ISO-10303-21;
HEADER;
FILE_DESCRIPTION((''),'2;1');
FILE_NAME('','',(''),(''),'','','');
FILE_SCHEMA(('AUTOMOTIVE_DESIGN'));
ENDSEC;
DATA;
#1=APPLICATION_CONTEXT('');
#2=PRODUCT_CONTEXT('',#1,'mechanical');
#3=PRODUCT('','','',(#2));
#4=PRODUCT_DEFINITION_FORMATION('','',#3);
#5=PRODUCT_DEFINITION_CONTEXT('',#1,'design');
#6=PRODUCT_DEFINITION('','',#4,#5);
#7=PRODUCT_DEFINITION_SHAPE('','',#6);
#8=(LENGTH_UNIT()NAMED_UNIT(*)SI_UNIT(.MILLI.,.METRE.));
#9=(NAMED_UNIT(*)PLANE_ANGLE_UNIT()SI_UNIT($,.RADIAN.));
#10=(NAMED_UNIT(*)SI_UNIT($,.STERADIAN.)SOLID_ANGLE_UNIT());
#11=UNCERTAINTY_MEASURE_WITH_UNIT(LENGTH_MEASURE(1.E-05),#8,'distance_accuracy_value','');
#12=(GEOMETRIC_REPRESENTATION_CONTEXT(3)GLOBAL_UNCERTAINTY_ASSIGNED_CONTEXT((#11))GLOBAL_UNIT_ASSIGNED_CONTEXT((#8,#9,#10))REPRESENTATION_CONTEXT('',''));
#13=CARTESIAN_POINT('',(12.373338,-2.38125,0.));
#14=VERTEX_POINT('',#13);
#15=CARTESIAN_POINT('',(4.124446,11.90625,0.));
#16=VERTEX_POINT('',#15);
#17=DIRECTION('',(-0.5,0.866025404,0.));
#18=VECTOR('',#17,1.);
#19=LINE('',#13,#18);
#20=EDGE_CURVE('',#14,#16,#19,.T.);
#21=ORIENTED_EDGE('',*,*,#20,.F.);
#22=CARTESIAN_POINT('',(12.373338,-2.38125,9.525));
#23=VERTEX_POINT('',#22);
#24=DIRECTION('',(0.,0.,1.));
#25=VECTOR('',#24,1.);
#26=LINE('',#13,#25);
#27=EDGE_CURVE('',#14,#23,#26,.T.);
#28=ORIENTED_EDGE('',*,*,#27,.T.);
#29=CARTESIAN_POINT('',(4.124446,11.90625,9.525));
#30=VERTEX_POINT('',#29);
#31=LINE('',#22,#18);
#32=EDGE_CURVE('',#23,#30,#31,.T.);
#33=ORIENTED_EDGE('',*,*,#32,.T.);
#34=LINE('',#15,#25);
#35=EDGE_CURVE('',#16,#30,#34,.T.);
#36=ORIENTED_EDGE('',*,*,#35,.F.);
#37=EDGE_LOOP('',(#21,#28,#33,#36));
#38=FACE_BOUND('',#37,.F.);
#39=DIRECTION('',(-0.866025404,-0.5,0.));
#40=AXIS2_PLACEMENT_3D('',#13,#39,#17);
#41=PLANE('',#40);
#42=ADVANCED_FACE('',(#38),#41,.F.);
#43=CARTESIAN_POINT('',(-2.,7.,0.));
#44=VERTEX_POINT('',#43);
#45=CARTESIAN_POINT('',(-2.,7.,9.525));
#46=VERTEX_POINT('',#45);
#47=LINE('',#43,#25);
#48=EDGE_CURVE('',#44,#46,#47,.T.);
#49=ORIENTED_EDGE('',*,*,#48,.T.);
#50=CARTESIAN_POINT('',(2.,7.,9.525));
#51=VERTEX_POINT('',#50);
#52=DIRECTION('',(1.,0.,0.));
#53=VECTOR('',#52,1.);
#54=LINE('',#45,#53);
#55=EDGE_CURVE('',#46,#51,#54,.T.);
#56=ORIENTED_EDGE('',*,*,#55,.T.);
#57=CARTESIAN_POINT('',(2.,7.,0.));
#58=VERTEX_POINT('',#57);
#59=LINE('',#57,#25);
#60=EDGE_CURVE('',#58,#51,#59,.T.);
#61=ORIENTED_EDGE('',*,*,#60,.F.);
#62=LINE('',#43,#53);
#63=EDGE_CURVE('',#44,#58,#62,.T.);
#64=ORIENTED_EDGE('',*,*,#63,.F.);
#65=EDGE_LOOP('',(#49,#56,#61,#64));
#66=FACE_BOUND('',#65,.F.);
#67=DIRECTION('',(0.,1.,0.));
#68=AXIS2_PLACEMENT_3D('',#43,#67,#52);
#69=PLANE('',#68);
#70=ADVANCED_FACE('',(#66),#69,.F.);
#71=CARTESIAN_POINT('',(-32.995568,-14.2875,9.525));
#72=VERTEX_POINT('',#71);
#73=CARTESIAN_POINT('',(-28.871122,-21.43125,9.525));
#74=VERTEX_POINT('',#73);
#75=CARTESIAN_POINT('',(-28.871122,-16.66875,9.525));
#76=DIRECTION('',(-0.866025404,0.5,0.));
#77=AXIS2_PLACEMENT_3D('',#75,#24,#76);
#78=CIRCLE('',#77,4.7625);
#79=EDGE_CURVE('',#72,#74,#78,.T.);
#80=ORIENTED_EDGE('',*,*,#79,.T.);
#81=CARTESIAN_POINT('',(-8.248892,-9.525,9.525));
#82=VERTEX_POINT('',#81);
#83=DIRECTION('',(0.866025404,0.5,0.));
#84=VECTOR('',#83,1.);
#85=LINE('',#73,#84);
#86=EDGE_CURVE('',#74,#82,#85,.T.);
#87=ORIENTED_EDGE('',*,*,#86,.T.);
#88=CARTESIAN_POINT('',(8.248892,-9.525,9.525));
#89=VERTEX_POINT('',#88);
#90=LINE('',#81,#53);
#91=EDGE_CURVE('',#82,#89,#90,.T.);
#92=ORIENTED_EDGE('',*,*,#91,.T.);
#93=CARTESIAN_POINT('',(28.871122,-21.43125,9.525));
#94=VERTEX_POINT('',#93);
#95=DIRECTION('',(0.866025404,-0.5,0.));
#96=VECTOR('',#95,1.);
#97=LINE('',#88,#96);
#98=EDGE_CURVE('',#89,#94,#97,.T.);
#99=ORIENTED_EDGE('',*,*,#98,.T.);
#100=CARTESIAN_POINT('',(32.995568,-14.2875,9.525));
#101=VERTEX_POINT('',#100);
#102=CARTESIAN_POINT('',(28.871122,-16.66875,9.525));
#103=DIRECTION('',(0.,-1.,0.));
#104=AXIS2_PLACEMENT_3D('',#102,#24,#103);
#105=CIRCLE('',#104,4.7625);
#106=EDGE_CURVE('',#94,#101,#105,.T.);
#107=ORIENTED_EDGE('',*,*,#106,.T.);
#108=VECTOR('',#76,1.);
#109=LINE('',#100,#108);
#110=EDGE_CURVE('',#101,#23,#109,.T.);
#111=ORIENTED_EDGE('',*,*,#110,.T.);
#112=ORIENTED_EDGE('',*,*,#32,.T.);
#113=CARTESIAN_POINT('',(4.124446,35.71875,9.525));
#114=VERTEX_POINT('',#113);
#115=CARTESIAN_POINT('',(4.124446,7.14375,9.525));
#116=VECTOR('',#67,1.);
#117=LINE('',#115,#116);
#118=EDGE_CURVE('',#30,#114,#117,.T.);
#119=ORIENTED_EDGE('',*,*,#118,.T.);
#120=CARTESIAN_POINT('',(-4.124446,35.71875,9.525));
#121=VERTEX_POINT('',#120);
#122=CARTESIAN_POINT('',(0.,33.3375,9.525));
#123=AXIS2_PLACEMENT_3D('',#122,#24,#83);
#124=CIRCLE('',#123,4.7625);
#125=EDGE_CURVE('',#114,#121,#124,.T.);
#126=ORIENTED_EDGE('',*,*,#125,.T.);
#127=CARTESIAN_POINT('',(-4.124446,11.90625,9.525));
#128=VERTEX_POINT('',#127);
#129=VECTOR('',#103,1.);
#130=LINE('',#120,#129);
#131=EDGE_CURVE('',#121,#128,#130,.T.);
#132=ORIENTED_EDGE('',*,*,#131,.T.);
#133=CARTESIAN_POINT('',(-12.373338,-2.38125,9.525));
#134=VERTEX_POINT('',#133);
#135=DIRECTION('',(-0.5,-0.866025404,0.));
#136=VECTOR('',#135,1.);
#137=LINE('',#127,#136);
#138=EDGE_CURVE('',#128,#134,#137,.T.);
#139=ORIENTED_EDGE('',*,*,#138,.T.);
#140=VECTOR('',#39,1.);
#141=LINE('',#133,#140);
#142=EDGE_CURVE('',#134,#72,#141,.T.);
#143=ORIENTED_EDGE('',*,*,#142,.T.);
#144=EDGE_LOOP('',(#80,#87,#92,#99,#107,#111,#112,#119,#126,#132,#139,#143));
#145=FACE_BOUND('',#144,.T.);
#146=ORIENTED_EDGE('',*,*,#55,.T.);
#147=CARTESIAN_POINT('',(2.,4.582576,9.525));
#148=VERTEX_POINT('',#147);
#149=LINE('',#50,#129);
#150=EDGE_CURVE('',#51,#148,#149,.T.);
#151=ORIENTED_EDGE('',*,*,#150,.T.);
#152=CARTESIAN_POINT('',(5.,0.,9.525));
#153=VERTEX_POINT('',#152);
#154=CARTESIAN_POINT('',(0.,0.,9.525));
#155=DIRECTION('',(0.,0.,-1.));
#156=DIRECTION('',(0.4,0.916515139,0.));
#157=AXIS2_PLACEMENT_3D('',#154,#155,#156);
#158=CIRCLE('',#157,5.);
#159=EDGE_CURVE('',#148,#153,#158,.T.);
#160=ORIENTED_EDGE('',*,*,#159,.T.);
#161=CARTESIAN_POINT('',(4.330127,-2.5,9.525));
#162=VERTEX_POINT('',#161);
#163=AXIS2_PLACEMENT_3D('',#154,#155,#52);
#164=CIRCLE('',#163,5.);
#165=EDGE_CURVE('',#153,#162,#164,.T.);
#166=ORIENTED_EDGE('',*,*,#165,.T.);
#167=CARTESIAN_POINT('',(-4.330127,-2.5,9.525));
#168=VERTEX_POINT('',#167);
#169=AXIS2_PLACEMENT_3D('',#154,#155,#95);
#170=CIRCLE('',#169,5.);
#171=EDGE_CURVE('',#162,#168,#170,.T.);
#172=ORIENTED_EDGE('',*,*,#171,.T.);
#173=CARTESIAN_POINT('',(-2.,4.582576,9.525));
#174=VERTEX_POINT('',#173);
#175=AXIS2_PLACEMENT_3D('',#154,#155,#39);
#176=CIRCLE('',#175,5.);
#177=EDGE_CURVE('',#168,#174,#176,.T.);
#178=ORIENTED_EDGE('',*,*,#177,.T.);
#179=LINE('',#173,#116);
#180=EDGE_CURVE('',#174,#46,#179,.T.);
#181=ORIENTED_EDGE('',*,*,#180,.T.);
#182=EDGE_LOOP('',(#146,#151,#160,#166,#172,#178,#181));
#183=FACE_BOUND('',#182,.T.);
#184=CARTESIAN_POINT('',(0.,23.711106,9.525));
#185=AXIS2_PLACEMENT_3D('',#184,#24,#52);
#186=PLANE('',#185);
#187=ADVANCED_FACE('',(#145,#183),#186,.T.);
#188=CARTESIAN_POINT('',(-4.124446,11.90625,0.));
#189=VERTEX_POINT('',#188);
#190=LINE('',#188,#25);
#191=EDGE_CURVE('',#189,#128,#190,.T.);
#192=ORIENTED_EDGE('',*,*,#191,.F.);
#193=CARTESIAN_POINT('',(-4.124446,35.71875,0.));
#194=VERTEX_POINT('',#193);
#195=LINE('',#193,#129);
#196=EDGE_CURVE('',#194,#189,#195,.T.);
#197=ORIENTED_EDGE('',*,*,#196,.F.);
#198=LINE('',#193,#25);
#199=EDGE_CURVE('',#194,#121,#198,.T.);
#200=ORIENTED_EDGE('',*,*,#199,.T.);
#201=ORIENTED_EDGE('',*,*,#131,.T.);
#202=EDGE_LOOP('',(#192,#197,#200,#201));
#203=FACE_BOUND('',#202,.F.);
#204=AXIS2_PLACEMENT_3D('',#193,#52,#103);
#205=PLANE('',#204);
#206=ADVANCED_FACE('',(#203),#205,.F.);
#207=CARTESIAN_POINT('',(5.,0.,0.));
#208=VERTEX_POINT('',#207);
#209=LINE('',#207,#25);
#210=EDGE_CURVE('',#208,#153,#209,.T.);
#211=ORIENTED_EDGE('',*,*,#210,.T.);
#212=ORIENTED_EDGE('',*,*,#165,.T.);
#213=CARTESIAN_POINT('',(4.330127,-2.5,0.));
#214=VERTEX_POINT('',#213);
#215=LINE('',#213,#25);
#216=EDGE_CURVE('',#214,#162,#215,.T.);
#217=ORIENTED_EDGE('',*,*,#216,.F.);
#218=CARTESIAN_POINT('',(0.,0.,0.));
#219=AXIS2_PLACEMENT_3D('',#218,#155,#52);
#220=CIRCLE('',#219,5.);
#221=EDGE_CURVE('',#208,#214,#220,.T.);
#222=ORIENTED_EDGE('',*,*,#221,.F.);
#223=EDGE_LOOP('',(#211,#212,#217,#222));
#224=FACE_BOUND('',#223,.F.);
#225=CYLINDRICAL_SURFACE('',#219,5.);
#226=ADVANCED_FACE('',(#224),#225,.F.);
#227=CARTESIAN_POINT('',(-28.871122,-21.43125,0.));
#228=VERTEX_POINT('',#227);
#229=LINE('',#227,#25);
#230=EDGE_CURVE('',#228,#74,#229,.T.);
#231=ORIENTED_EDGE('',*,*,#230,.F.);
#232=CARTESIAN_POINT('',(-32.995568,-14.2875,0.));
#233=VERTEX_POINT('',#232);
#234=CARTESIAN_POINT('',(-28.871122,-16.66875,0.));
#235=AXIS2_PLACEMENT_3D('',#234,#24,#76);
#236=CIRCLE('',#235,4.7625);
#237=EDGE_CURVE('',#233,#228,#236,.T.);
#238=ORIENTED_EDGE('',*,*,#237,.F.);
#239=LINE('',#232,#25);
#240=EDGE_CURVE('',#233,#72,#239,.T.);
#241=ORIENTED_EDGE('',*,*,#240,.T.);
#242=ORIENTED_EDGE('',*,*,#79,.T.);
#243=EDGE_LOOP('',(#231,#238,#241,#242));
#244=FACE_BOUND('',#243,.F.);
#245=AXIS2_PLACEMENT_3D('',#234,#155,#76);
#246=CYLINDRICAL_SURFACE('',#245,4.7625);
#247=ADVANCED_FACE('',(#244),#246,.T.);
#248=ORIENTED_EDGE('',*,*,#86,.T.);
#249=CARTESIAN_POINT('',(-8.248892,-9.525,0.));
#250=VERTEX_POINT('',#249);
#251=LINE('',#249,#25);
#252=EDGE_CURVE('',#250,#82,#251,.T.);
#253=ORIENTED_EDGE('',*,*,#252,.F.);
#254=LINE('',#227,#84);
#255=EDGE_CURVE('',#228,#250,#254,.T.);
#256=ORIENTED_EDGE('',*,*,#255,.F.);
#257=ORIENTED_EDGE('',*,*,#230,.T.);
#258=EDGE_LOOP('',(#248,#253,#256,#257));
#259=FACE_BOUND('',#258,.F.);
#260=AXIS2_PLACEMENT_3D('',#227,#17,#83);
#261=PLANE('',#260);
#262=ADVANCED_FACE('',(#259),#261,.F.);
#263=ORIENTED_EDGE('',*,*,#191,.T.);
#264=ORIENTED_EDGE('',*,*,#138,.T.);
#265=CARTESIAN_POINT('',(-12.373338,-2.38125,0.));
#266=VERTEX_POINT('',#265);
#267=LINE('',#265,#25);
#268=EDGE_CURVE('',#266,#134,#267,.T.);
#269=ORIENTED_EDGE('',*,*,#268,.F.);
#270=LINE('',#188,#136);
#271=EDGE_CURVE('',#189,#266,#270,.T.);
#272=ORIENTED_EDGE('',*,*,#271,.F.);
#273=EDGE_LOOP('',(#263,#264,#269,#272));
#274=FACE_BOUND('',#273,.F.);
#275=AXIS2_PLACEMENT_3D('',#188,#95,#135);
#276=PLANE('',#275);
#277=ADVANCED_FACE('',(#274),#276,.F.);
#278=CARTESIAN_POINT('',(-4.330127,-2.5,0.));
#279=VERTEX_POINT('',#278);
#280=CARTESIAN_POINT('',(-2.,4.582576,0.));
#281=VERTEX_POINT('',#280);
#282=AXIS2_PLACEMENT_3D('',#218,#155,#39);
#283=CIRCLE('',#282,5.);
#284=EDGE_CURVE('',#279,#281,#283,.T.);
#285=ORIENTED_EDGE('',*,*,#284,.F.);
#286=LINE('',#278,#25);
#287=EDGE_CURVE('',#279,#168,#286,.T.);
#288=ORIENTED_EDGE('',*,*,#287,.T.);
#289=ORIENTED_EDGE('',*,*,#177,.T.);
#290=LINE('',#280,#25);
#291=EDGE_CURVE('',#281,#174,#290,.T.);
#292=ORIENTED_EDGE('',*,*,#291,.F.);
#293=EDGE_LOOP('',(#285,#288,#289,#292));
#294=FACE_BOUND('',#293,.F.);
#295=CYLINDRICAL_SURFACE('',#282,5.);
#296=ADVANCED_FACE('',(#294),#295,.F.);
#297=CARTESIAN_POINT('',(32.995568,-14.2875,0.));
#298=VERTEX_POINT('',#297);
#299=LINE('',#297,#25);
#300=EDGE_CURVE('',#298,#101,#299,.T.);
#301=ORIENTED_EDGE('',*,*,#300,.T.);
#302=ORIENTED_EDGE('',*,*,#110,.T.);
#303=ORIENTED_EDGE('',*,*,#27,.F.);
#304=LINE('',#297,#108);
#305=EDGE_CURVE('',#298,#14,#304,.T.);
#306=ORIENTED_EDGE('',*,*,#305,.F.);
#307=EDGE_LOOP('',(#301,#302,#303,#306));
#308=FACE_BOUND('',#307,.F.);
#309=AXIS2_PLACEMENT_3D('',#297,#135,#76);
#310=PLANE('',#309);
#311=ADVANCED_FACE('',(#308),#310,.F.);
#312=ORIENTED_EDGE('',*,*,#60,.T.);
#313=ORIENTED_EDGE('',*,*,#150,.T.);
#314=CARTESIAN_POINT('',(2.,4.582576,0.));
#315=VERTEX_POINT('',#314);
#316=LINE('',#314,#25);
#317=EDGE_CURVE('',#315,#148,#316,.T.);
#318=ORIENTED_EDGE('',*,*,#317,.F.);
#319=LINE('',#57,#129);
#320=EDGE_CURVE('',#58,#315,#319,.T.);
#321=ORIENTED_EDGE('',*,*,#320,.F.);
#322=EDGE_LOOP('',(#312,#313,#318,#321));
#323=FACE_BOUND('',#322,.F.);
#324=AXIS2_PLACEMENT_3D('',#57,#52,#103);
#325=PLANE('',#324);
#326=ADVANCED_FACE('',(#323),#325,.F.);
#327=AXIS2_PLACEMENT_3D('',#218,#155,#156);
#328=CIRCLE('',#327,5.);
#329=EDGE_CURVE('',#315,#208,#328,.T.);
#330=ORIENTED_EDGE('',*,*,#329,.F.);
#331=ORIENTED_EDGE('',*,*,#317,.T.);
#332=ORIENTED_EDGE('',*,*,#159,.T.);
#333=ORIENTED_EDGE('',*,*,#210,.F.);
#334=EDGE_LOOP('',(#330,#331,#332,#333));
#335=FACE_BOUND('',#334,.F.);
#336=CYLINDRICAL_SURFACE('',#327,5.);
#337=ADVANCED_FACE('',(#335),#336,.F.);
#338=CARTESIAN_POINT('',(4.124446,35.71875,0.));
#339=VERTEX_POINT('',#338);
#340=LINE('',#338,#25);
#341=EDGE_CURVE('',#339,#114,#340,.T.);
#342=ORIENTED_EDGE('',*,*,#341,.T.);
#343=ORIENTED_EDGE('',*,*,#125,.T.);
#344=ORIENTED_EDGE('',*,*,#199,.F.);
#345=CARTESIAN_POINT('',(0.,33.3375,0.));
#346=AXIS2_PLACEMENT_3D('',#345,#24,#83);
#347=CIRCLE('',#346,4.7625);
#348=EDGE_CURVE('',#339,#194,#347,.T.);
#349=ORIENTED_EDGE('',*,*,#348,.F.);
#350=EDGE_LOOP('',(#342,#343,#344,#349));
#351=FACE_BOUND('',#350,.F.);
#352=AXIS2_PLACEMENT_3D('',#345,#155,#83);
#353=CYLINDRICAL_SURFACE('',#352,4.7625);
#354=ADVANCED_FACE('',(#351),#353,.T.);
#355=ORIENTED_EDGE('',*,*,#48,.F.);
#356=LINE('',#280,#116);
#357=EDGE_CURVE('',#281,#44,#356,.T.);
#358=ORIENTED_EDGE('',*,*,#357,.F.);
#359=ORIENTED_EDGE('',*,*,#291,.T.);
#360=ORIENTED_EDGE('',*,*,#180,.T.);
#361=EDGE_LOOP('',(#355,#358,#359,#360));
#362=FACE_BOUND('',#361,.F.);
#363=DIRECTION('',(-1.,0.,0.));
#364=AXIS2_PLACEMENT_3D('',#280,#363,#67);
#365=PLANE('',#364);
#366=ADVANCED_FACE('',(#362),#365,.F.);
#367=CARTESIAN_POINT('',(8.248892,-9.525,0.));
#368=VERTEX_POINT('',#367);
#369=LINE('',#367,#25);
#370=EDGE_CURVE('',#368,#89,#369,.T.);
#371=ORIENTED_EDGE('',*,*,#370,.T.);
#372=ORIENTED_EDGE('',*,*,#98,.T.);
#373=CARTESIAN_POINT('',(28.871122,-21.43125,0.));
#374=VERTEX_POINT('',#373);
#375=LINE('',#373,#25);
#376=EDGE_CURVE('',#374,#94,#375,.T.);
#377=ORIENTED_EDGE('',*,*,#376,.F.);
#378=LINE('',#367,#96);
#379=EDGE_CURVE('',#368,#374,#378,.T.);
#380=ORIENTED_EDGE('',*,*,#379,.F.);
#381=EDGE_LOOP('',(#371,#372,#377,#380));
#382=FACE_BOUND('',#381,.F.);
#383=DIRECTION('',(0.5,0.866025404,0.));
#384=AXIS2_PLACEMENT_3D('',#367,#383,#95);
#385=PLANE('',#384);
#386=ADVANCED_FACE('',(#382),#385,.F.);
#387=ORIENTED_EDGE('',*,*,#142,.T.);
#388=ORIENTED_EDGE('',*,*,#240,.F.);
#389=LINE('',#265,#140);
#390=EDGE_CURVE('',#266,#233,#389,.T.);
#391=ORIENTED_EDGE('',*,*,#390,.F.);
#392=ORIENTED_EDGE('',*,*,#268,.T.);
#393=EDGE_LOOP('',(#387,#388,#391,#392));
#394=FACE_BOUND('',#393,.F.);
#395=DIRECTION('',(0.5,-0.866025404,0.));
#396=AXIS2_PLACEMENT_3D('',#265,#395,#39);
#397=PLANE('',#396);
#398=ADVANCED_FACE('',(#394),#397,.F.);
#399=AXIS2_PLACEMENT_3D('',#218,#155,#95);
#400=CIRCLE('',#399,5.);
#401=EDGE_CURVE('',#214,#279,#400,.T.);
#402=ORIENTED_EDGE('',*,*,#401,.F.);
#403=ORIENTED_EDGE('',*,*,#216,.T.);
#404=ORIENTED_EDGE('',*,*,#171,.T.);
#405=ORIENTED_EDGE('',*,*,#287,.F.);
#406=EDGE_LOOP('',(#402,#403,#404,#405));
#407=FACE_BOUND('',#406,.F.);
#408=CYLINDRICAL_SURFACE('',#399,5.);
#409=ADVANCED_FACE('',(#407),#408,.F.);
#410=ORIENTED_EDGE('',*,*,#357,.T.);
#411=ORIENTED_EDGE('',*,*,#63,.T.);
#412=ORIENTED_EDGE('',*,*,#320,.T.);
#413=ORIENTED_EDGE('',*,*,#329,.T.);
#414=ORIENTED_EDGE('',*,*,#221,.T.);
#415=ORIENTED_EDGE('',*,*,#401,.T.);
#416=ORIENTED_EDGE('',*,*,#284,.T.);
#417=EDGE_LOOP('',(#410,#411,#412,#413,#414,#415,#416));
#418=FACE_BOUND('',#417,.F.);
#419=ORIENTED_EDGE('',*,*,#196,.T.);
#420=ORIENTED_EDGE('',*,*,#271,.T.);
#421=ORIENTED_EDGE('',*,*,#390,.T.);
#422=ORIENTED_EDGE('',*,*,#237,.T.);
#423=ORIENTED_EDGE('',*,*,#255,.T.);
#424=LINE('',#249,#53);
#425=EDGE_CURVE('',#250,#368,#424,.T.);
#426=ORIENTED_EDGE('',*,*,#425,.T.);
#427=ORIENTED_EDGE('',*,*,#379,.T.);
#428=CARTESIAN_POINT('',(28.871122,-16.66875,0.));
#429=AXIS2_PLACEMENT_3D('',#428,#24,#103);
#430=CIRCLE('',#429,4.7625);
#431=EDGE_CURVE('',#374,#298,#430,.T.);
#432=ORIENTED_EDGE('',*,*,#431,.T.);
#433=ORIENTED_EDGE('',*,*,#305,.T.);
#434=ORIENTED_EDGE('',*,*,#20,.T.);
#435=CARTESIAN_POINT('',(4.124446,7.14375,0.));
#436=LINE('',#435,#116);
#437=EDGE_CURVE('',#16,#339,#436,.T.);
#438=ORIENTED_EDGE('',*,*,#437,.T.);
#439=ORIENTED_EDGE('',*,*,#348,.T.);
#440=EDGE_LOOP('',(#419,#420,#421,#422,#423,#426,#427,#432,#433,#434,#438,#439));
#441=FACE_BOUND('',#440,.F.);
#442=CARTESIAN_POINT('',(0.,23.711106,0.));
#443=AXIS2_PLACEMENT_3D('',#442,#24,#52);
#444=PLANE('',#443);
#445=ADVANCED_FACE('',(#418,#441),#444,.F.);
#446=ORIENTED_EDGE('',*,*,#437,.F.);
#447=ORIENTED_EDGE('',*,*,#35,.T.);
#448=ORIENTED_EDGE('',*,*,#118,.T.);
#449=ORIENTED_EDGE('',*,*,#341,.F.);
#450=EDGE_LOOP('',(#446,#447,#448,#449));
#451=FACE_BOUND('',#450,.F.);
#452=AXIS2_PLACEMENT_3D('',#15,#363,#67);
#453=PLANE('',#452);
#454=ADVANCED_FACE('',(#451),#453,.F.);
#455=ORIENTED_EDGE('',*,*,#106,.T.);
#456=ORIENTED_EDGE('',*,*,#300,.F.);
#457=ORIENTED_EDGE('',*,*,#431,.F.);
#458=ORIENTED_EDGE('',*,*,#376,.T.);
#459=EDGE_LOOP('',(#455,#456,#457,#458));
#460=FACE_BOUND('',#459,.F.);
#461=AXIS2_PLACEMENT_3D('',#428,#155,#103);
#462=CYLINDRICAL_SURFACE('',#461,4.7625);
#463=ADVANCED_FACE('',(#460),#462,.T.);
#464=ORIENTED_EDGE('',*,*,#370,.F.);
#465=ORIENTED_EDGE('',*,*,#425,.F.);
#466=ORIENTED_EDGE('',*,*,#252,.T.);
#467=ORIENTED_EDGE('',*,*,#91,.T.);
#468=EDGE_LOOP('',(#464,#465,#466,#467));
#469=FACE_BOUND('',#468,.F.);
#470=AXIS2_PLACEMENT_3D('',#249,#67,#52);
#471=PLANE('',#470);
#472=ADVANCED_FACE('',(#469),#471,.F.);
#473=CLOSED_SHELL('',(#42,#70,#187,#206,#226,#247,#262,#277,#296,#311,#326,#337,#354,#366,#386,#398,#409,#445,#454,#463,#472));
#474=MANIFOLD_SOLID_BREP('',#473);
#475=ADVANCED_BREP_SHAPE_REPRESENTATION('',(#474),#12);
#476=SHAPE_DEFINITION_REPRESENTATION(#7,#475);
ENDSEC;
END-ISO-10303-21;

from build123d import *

# Parameters (mm, degrees)
F2_DEPTH = 9.525


# Not quite as in the source:
# - a variable given as a bare number and used for a length is read in inches; the dataset says mm whatever the document's units were


with BuildPart() as f2:
    # F1 (on Top) → F2 (new body)
    with BuildSketch(Plane.XY):
        with BuildLine():
            Line((4.1244459855, 11.90625), (4.1244459855, 35.71875))
            ThreePointArc((4.1244459855, 35.71875), (0, 38.1), (-4.1244459855, 35.71875))
            Line((-4.1244459855, 35.71875), (-4.1244459855, 11.90625))
            Line((-4.1244459855, 11.90625), (0, 19.05))
            Line((0, 19.05), (4.1244459855, 11.90625))
        make_face()
        with BuildLine():
            Line((4.1244459855, 7.14375), (4.1244459855, 11.90625))
            Line((4.1244459855, 11.90625), (0, 19.05))
            Line((0, 19.05), (0, 7))
            Line((0, 7), (2, 7))
            Line((2, 7), (2, 4.582575695))
            ThreePointArc((2, 4.582575695), (4.1833001327, 2.7386127875), (5, 0))
            ThreePointArc((5, 0), (4.8296291314, -1.2940952255), (4.3301270189, -2.5))
            Line((4.3301270189, -2.5), (16.4977839421, -9.525))
            Line((16.4977839421, -9.525), (12.3733379566, -2.38125))
            Line((12.3733379566, -2.38125), (8.248891971, 0))
            Line((8.248891971, 0), (4.1244459855, 7.14375))
        make_face()
        with BuildLine():
            Line((0, 19.05), (-4.1244459855, 11.90625))
            Line((-4.1244459855, 11.90625), (-4.1244459855, 7.14375))
            Line((-4.1244459855, 7.14375), (-8.248891971, 0))
            Line((-8.248891971, 0), (-12.3733379566, -2.38125))
            Line((-12.3733379566, -2.38125), (-16.4977839421, -9.525))
            Line((-16.4977839421, -9.525), (-4.3301270189, -2.5))
            ThreePointArc((-4.3301270189, -2.5), (-4.7495627838, 1.562579074), (-2, 4.582575695))
            Line((-2, 4.582575695), (-2, 7))
            Line((-2, 7), (0, 7))
            Line((0, 7), (0, 19.05))
        make_face()
        with BuildLine():
            Line((4.1244459855, -7.14375), (8.248891971, -9.525))
            Line((8.248891971, -9.525), (16.4977839421, -9.525))
            Line((16.4977839421, -9.525), (4.3301270189, -2.5))
            ThreePointArc((4.3301270189, -2.5), (0, -5), (-4.3301270189, -2.5))
            Line((-4.3301270189, -2.5), (-16.4977839421, -9.525))
            Line((-16.4977839421, -9.525), (-8.248891971, -9.525))
            Line((-8.248891971, -9.525), (-4.1244459855, -7.14375))
            Line((-4.1244459855, -7.14375), (4.1244459855, -7.14375))
        make_face()
        with BuildLine():
            ThreePointArc((28.8711218987, -21.43125), (32.9955678842, -19.05), (32.9955678842, -14.2875))
            Line((32.9955678842, -14.2875), (12.3733379566, -2.38125))
            Line((12.3733379566, -2.38125), (16.4977839421, -9.525))
            Line((16.4977839421, -9.525), (8.248891971, -9.525))
            Line((8.248891971, -9.525), (28.8711218987, -21.43125))
        make_face()
        with BuildLine():
            Line((-12.3733379566, -2.38125), (-32.9955678842, -14.2875))
            ThreePointArc((-32.9955678842, -14.2875), (-32.9955678842, -19.05), (-28.8711218987, -21.43125))
            Line((-28.8711218987, -21.43125), (-8.248891971, -9.525))
            Line((-8.248891971, -9.525), (-16.4977839421, -9.525))
            Line((-16.4977839421, -9.525), (-12.3733379566, -2.38125))
        make_face()
        Polygon((-8.248891971, -9.525), (8.248891971, -9.525), (4.1244459855, -7.14375), (-4.1244459855, -7.14375), align=None)
        Polygon((12.3733379566, -2.38125), (4.1244459855, 11.90625), (4.1244459855, 7.14375), (8.248891971, 0), align=None)
        Polygon((-4.1244459855, 7.14375), (-4.1244459855, 11.90625), (-12.3733379566, -2.38125), (-8.248891971, 0), align=None)
    extrude(amount=F2_DEPTH)


solid = f2.part
